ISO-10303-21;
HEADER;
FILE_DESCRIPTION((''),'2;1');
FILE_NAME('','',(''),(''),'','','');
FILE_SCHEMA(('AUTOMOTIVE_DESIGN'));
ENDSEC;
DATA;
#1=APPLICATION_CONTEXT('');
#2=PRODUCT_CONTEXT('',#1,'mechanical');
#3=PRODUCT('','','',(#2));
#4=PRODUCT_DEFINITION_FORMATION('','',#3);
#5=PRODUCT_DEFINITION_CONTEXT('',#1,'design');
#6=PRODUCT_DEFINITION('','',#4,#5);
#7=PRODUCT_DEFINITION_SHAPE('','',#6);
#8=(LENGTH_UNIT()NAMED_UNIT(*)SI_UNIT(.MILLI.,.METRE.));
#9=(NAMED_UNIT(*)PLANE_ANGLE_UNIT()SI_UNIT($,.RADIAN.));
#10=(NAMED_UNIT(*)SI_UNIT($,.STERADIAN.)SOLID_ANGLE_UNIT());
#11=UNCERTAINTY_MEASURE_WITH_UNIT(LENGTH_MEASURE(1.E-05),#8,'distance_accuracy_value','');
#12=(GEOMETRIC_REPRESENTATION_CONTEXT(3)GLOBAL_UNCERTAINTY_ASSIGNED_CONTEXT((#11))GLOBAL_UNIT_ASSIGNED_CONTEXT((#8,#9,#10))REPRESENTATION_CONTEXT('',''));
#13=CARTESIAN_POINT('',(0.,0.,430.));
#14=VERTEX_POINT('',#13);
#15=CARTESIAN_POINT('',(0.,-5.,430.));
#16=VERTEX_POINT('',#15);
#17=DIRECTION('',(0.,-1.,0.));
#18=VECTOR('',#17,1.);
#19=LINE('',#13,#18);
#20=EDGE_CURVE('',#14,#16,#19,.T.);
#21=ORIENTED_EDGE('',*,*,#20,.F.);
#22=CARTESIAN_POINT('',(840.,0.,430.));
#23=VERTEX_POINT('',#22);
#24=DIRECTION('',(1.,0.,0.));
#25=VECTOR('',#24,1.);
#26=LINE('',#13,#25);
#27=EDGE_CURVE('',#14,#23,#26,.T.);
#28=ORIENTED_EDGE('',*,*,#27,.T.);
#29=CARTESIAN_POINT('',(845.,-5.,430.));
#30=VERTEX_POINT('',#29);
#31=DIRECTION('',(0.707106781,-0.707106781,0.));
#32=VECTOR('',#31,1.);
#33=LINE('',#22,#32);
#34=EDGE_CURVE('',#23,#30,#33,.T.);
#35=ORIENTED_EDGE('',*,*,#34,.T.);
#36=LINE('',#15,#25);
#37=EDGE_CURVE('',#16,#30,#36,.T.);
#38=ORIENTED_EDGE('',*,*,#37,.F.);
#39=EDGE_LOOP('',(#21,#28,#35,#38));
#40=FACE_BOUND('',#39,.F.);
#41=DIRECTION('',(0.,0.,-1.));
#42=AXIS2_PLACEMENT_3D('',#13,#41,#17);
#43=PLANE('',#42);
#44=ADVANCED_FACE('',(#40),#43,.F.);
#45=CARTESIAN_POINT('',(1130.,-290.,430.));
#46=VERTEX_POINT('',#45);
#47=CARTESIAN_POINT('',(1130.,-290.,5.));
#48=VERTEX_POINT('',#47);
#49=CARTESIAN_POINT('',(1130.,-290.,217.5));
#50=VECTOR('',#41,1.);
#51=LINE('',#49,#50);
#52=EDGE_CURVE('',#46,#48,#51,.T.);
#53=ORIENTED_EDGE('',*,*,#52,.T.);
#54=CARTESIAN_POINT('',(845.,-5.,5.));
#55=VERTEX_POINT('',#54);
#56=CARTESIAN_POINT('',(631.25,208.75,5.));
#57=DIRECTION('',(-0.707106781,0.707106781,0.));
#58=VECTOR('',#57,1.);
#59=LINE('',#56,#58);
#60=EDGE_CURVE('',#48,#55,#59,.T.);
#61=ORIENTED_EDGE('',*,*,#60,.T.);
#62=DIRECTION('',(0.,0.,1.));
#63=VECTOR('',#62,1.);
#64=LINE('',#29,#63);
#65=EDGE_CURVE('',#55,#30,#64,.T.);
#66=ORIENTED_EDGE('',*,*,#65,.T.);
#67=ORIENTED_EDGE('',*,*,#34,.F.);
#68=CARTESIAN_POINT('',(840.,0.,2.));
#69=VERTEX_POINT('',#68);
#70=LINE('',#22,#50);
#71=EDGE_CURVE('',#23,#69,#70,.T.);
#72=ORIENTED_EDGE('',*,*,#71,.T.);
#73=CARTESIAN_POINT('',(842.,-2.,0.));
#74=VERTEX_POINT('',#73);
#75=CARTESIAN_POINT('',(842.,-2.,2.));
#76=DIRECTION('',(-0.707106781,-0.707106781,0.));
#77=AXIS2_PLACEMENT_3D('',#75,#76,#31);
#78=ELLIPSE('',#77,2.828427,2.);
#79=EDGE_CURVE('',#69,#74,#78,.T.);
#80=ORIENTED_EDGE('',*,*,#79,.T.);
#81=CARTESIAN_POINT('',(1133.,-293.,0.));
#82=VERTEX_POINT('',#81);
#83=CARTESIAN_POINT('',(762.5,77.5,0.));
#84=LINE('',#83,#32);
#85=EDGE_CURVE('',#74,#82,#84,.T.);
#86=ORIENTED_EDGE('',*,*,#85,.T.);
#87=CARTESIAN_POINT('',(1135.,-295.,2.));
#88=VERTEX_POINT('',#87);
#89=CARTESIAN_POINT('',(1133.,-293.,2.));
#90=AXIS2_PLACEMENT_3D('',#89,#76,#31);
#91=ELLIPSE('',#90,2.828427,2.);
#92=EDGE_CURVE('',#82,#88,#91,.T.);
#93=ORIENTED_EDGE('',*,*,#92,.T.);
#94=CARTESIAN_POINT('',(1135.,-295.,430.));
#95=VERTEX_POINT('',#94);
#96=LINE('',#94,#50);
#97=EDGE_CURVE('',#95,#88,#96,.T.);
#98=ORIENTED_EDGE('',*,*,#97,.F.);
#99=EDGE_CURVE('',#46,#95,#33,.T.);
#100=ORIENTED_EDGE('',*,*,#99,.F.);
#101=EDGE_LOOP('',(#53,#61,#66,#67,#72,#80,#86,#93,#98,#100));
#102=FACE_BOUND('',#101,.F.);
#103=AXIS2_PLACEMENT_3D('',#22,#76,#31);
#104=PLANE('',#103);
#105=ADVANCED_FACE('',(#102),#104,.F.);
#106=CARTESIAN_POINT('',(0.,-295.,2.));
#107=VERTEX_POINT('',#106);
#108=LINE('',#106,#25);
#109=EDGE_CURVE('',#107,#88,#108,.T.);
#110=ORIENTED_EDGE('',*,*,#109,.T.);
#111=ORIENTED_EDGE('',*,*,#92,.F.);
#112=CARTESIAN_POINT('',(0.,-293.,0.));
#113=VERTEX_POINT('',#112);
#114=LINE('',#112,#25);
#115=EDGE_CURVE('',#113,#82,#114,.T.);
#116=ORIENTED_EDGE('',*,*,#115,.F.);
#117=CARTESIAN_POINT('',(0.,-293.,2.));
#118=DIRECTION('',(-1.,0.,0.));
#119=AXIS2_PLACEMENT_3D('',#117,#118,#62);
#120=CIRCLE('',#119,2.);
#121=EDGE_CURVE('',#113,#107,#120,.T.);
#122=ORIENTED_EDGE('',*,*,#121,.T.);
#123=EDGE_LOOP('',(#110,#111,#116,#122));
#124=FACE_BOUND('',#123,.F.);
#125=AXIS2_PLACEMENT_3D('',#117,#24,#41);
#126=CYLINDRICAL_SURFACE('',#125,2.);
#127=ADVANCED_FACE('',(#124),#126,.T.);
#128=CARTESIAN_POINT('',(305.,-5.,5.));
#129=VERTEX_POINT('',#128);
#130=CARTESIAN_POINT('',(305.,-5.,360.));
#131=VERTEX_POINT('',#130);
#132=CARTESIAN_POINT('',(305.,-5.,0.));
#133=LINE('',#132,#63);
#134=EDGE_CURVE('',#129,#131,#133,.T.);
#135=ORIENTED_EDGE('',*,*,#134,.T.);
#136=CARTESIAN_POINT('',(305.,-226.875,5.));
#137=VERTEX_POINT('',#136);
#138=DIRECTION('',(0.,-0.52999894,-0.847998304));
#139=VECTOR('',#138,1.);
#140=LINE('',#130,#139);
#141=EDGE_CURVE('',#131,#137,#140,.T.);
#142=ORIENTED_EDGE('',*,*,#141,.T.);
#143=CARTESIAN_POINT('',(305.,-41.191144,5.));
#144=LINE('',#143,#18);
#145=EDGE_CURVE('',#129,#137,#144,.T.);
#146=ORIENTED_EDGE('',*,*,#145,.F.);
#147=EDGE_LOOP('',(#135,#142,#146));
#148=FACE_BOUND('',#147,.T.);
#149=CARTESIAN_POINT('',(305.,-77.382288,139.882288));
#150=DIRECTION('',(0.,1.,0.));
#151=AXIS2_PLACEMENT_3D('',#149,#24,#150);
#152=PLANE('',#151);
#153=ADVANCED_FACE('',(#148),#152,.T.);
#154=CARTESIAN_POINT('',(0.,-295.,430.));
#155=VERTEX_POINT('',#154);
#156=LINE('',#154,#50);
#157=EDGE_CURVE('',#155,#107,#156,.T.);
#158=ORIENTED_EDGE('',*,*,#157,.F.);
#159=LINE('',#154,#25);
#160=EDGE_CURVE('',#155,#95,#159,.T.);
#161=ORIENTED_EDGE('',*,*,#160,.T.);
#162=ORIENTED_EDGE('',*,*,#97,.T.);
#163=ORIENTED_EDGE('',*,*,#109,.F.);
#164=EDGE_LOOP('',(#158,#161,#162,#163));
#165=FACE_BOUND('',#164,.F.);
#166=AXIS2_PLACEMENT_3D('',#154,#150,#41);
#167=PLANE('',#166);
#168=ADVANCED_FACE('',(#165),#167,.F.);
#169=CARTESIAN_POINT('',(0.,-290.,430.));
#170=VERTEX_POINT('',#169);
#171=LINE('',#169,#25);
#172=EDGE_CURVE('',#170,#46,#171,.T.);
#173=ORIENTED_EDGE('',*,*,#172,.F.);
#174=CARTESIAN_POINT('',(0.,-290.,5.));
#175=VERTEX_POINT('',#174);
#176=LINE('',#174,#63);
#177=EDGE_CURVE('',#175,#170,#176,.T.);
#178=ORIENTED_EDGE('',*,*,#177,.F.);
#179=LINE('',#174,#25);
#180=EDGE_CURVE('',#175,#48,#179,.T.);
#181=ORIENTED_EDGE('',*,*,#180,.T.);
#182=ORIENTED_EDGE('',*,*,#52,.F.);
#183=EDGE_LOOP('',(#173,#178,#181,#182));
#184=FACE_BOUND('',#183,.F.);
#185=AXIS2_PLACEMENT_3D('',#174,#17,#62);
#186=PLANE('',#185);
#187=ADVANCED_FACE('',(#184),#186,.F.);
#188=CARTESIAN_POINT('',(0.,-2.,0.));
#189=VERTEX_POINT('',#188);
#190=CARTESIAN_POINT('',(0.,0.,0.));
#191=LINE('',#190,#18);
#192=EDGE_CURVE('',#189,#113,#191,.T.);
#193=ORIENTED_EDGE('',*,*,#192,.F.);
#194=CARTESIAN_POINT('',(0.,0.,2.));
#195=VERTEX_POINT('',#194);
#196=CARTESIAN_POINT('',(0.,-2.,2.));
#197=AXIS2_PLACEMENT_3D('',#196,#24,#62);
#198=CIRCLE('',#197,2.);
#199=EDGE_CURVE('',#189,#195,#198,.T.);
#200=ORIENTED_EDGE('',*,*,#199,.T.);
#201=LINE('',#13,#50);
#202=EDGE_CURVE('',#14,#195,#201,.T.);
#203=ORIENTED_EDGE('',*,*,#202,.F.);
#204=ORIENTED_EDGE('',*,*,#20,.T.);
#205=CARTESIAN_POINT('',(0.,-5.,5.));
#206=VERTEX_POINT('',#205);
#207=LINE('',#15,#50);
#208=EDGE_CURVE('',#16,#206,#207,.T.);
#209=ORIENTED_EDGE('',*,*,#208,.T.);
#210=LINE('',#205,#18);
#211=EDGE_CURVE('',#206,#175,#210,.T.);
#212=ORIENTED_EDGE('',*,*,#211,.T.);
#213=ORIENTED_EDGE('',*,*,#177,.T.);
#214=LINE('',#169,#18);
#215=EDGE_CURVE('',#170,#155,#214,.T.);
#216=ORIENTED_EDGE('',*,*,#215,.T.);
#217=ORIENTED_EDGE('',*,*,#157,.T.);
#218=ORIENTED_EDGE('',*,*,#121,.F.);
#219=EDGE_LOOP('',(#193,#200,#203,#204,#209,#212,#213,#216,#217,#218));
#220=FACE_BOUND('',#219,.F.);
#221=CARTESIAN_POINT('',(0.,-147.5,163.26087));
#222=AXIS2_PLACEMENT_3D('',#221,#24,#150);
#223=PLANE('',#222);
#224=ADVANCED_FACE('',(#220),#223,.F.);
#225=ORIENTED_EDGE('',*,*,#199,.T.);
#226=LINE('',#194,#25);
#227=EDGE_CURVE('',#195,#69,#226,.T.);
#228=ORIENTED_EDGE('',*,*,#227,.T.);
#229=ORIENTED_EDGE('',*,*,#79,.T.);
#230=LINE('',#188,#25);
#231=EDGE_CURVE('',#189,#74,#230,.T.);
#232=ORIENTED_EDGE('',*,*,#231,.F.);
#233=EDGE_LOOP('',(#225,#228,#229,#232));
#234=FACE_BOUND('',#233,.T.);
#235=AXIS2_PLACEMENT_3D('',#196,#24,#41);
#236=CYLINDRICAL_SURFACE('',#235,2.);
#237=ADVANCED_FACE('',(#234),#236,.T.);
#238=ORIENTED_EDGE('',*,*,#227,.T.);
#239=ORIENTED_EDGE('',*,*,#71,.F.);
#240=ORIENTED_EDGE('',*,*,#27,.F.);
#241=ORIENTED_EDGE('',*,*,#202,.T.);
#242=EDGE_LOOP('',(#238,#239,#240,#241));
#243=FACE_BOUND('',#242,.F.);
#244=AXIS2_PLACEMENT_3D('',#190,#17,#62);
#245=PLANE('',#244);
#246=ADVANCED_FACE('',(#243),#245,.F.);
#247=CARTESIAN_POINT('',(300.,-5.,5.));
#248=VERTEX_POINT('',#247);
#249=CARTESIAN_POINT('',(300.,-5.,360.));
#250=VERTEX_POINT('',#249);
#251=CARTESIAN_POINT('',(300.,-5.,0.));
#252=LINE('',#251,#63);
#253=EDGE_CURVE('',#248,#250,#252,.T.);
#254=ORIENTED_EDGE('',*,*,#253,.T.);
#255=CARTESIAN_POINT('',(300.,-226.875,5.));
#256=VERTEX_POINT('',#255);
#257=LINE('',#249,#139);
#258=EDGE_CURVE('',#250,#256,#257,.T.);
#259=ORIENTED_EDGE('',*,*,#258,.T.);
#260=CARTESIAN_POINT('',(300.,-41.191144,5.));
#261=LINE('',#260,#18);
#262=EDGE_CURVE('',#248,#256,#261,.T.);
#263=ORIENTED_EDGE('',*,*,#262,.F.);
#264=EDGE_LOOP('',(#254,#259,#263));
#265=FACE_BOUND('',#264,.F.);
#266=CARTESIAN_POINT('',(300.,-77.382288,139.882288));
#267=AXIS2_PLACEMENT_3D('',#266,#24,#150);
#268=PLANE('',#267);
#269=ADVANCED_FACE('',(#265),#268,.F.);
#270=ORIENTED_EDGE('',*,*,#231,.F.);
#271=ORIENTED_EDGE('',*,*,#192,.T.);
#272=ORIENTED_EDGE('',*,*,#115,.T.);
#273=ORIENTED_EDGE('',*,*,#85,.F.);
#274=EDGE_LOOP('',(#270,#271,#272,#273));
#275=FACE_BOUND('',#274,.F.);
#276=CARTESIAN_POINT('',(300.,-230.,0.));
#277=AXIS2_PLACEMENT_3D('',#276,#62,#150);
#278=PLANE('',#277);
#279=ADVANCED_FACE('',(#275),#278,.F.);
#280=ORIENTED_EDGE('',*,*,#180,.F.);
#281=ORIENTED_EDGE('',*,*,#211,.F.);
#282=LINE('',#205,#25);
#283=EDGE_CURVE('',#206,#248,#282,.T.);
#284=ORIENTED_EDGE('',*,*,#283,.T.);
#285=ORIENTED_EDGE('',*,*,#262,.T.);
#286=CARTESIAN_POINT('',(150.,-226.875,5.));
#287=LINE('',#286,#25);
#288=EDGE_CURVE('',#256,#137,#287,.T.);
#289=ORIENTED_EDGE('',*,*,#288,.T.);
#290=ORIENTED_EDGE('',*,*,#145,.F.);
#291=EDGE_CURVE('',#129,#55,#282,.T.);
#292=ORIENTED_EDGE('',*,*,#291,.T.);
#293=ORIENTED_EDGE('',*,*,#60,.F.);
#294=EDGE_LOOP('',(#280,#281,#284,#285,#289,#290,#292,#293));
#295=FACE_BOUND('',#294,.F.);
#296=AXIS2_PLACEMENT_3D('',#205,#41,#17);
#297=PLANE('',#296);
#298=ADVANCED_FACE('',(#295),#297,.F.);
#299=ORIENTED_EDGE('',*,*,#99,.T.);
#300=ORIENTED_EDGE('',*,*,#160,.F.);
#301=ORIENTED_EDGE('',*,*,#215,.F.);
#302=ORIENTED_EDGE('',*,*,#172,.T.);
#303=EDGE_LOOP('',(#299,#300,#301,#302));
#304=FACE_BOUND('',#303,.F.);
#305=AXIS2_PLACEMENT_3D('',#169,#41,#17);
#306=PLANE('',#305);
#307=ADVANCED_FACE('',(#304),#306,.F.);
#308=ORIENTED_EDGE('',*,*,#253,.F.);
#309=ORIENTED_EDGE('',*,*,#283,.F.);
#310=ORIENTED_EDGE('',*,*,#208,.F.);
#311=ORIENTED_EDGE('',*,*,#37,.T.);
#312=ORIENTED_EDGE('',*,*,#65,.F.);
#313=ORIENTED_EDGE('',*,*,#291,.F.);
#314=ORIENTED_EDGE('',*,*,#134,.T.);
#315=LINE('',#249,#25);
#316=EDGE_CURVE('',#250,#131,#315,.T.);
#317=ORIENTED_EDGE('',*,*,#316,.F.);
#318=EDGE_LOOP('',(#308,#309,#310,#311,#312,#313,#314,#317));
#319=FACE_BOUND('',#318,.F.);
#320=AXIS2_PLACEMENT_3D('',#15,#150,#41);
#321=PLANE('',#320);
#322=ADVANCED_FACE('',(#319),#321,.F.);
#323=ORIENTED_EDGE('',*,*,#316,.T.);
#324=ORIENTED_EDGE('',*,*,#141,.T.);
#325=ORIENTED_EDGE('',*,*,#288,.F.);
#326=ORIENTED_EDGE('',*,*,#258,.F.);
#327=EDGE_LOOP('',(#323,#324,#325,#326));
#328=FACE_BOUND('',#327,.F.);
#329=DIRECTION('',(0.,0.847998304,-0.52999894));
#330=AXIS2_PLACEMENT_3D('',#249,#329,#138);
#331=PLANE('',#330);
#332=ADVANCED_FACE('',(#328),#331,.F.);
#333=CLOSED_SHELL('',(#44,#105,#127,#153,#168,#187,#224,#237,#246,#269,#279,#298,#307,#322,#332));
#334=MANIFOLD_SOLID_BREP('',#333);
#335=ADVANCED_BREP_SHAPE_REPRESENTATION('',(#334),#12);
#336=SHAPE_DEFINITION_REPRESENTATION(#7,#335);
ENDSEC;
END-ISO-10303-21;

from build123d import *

# Parameters (mm, degrees)
F1_DEPTH = 1200
F4_DEPTH = 5
F5_W     = 1200
F5_H     = 230
F6_DEPTH = 4
F7_R     = 2
F9_DEPTH = 430.001


# Not quite as in the source:
# - a feature names something its author has since deleted; it is built from what else it names


with BuildPart() as f1:
    # F0 (on Right) → F1 (new body)
    with BuildSketch(Plane.YZ):
        Polygon((-295, 0), (0, 0), (0, 430), (-5, 430), (-5, 5), (-290, 5), (-290, 430), (-295, 430), align=None)
    extrude(amount=F1_DEPTH)



with BuildPart() as f4:
    # F3 (on offset) → F4 (new body)
    with BuildSketch(Plane.YZ.offset(300)):
        Polygon((-230, 0), (-5, 0), (-5, 360), align=None)
    extrude(amount=F4_DEPTH)


with BuildPart() as f1_1:
    add(f1.part)

    add(f4.part)  # F6 merges F4
    # F5 (on Top) → F6 (join)
    with BuildSketch(Plane.XY):
        with Locations((600, -115)):
            Rectangle(F5_W, F5_H)
    extrude(amount=F6_DEPTH)

    # F7
    f7_edges = [f1_1.edges().sort_by_distance(p)[0] for p in [
        (600, 0, 0),
        (600, -295, 0),
    ]]
    fillet(f7_edges, radius=F7_R)

    # F8 (on face) → F9 (cut, through all)
    with BuildSketch(Plane.XY.offset(430)):
        Polygon((840, 0), (1135, -295), (1200, -295), (1200, 0), align=None)
    extrude(amount=-F9_DEPTH, mode=Mode.SUBTRACT)


solid = f1_1.part
